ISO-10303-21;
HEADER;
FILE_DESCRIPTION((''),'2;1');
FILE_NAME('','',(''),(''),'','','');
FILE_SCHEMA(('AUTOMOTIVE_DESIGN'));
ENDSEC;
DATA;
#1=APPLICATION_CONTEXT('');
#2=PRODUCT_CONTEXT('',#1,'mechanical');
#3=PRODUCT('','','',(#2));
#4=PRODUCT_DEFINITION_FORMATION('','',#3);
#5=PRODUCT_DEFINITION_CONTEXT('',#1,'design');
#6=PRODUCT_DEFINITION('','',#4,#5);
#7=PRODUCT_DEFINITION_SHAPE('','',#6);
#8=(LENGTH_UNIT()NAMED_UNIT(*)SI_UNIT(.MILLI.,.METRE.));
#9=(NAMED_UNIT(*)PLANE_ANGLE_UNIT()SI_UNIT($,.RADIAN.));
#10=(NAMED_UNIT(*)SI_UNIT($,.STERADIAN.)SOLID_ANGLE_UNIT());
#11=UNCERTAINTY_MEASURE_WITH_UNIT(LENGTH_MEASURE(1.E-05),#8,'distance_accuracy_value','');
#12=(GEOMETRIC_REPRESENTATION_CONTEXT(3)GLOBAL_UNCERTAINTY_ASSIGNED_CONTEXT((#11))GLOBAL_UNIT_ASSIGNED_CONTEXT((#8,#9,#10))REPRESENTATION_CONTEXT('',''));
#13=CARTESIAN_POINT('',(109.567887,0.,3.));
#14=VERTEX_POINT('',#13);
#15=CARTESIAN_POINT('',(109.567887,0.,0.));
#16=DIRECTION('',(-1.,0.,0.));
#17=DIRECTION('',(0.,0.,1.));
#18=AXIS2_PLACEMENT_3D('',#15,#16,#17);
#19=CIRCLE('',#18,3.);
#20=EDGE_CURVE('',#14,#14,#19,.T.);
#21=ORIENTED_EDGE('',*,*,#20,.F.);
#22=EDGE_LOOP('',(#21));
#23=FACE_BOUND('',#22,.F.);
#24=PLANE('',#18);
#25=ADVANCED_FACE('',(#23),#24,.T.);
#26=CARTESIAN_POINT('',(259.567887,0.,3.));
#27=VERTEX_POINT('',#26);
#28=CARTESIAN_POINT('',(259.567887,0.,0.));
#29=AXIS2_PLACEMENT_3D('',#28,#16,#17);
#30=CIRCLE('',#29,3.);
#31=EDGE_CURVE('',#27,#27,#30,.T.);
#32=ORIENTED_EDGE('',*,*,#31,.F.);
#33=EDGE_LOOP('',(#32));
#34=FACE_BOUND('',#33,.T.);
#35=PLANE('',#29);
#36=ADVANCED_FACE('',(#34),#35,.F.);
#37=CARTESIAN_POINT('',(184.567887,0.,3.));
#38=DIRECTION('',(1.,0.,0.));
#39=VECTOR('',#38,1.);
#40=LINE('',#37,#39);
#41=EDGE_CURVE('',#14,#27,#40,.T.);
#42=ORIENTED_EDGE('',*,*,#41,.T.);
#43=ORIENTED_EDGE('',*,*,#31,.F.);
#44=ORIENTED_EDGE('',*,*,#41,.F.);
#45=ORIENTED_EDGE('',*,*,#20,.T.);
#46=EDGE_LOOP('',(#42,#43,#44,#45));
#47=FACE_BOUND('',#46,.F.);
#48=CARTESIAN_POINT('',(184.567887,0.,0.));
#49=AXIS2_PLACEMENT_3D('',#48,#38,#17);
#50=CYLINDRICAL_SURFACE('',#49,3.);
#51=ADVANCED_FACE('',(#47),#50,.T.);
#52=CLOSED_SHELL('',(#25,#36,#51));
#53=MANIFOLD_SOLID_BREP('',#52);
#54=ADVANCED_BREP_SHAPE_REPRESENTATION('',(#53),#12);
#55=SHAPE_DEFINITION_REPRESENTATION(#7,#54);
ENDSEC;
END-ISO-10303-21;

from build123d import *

# Parameters (mm, degrees)
F1_W = 150
F1_H = 3


# Not quite as in the source:
# - the program builds the solid bodies; features that only make, move or delete a surface that nothing else refers to are left out


with BuildPart() as f3:
    # F1 (on Front) → F3 (revolve)
    with BuildSketch(Plane.XZ):
        with Locations((184.567886591, 1.5)):
            Rectangle(F1_W, F1_H)
    revolve(axis=Axis((-24.9094008468, 0, 0), (-1, 0, 0)))


solid = f3.part
